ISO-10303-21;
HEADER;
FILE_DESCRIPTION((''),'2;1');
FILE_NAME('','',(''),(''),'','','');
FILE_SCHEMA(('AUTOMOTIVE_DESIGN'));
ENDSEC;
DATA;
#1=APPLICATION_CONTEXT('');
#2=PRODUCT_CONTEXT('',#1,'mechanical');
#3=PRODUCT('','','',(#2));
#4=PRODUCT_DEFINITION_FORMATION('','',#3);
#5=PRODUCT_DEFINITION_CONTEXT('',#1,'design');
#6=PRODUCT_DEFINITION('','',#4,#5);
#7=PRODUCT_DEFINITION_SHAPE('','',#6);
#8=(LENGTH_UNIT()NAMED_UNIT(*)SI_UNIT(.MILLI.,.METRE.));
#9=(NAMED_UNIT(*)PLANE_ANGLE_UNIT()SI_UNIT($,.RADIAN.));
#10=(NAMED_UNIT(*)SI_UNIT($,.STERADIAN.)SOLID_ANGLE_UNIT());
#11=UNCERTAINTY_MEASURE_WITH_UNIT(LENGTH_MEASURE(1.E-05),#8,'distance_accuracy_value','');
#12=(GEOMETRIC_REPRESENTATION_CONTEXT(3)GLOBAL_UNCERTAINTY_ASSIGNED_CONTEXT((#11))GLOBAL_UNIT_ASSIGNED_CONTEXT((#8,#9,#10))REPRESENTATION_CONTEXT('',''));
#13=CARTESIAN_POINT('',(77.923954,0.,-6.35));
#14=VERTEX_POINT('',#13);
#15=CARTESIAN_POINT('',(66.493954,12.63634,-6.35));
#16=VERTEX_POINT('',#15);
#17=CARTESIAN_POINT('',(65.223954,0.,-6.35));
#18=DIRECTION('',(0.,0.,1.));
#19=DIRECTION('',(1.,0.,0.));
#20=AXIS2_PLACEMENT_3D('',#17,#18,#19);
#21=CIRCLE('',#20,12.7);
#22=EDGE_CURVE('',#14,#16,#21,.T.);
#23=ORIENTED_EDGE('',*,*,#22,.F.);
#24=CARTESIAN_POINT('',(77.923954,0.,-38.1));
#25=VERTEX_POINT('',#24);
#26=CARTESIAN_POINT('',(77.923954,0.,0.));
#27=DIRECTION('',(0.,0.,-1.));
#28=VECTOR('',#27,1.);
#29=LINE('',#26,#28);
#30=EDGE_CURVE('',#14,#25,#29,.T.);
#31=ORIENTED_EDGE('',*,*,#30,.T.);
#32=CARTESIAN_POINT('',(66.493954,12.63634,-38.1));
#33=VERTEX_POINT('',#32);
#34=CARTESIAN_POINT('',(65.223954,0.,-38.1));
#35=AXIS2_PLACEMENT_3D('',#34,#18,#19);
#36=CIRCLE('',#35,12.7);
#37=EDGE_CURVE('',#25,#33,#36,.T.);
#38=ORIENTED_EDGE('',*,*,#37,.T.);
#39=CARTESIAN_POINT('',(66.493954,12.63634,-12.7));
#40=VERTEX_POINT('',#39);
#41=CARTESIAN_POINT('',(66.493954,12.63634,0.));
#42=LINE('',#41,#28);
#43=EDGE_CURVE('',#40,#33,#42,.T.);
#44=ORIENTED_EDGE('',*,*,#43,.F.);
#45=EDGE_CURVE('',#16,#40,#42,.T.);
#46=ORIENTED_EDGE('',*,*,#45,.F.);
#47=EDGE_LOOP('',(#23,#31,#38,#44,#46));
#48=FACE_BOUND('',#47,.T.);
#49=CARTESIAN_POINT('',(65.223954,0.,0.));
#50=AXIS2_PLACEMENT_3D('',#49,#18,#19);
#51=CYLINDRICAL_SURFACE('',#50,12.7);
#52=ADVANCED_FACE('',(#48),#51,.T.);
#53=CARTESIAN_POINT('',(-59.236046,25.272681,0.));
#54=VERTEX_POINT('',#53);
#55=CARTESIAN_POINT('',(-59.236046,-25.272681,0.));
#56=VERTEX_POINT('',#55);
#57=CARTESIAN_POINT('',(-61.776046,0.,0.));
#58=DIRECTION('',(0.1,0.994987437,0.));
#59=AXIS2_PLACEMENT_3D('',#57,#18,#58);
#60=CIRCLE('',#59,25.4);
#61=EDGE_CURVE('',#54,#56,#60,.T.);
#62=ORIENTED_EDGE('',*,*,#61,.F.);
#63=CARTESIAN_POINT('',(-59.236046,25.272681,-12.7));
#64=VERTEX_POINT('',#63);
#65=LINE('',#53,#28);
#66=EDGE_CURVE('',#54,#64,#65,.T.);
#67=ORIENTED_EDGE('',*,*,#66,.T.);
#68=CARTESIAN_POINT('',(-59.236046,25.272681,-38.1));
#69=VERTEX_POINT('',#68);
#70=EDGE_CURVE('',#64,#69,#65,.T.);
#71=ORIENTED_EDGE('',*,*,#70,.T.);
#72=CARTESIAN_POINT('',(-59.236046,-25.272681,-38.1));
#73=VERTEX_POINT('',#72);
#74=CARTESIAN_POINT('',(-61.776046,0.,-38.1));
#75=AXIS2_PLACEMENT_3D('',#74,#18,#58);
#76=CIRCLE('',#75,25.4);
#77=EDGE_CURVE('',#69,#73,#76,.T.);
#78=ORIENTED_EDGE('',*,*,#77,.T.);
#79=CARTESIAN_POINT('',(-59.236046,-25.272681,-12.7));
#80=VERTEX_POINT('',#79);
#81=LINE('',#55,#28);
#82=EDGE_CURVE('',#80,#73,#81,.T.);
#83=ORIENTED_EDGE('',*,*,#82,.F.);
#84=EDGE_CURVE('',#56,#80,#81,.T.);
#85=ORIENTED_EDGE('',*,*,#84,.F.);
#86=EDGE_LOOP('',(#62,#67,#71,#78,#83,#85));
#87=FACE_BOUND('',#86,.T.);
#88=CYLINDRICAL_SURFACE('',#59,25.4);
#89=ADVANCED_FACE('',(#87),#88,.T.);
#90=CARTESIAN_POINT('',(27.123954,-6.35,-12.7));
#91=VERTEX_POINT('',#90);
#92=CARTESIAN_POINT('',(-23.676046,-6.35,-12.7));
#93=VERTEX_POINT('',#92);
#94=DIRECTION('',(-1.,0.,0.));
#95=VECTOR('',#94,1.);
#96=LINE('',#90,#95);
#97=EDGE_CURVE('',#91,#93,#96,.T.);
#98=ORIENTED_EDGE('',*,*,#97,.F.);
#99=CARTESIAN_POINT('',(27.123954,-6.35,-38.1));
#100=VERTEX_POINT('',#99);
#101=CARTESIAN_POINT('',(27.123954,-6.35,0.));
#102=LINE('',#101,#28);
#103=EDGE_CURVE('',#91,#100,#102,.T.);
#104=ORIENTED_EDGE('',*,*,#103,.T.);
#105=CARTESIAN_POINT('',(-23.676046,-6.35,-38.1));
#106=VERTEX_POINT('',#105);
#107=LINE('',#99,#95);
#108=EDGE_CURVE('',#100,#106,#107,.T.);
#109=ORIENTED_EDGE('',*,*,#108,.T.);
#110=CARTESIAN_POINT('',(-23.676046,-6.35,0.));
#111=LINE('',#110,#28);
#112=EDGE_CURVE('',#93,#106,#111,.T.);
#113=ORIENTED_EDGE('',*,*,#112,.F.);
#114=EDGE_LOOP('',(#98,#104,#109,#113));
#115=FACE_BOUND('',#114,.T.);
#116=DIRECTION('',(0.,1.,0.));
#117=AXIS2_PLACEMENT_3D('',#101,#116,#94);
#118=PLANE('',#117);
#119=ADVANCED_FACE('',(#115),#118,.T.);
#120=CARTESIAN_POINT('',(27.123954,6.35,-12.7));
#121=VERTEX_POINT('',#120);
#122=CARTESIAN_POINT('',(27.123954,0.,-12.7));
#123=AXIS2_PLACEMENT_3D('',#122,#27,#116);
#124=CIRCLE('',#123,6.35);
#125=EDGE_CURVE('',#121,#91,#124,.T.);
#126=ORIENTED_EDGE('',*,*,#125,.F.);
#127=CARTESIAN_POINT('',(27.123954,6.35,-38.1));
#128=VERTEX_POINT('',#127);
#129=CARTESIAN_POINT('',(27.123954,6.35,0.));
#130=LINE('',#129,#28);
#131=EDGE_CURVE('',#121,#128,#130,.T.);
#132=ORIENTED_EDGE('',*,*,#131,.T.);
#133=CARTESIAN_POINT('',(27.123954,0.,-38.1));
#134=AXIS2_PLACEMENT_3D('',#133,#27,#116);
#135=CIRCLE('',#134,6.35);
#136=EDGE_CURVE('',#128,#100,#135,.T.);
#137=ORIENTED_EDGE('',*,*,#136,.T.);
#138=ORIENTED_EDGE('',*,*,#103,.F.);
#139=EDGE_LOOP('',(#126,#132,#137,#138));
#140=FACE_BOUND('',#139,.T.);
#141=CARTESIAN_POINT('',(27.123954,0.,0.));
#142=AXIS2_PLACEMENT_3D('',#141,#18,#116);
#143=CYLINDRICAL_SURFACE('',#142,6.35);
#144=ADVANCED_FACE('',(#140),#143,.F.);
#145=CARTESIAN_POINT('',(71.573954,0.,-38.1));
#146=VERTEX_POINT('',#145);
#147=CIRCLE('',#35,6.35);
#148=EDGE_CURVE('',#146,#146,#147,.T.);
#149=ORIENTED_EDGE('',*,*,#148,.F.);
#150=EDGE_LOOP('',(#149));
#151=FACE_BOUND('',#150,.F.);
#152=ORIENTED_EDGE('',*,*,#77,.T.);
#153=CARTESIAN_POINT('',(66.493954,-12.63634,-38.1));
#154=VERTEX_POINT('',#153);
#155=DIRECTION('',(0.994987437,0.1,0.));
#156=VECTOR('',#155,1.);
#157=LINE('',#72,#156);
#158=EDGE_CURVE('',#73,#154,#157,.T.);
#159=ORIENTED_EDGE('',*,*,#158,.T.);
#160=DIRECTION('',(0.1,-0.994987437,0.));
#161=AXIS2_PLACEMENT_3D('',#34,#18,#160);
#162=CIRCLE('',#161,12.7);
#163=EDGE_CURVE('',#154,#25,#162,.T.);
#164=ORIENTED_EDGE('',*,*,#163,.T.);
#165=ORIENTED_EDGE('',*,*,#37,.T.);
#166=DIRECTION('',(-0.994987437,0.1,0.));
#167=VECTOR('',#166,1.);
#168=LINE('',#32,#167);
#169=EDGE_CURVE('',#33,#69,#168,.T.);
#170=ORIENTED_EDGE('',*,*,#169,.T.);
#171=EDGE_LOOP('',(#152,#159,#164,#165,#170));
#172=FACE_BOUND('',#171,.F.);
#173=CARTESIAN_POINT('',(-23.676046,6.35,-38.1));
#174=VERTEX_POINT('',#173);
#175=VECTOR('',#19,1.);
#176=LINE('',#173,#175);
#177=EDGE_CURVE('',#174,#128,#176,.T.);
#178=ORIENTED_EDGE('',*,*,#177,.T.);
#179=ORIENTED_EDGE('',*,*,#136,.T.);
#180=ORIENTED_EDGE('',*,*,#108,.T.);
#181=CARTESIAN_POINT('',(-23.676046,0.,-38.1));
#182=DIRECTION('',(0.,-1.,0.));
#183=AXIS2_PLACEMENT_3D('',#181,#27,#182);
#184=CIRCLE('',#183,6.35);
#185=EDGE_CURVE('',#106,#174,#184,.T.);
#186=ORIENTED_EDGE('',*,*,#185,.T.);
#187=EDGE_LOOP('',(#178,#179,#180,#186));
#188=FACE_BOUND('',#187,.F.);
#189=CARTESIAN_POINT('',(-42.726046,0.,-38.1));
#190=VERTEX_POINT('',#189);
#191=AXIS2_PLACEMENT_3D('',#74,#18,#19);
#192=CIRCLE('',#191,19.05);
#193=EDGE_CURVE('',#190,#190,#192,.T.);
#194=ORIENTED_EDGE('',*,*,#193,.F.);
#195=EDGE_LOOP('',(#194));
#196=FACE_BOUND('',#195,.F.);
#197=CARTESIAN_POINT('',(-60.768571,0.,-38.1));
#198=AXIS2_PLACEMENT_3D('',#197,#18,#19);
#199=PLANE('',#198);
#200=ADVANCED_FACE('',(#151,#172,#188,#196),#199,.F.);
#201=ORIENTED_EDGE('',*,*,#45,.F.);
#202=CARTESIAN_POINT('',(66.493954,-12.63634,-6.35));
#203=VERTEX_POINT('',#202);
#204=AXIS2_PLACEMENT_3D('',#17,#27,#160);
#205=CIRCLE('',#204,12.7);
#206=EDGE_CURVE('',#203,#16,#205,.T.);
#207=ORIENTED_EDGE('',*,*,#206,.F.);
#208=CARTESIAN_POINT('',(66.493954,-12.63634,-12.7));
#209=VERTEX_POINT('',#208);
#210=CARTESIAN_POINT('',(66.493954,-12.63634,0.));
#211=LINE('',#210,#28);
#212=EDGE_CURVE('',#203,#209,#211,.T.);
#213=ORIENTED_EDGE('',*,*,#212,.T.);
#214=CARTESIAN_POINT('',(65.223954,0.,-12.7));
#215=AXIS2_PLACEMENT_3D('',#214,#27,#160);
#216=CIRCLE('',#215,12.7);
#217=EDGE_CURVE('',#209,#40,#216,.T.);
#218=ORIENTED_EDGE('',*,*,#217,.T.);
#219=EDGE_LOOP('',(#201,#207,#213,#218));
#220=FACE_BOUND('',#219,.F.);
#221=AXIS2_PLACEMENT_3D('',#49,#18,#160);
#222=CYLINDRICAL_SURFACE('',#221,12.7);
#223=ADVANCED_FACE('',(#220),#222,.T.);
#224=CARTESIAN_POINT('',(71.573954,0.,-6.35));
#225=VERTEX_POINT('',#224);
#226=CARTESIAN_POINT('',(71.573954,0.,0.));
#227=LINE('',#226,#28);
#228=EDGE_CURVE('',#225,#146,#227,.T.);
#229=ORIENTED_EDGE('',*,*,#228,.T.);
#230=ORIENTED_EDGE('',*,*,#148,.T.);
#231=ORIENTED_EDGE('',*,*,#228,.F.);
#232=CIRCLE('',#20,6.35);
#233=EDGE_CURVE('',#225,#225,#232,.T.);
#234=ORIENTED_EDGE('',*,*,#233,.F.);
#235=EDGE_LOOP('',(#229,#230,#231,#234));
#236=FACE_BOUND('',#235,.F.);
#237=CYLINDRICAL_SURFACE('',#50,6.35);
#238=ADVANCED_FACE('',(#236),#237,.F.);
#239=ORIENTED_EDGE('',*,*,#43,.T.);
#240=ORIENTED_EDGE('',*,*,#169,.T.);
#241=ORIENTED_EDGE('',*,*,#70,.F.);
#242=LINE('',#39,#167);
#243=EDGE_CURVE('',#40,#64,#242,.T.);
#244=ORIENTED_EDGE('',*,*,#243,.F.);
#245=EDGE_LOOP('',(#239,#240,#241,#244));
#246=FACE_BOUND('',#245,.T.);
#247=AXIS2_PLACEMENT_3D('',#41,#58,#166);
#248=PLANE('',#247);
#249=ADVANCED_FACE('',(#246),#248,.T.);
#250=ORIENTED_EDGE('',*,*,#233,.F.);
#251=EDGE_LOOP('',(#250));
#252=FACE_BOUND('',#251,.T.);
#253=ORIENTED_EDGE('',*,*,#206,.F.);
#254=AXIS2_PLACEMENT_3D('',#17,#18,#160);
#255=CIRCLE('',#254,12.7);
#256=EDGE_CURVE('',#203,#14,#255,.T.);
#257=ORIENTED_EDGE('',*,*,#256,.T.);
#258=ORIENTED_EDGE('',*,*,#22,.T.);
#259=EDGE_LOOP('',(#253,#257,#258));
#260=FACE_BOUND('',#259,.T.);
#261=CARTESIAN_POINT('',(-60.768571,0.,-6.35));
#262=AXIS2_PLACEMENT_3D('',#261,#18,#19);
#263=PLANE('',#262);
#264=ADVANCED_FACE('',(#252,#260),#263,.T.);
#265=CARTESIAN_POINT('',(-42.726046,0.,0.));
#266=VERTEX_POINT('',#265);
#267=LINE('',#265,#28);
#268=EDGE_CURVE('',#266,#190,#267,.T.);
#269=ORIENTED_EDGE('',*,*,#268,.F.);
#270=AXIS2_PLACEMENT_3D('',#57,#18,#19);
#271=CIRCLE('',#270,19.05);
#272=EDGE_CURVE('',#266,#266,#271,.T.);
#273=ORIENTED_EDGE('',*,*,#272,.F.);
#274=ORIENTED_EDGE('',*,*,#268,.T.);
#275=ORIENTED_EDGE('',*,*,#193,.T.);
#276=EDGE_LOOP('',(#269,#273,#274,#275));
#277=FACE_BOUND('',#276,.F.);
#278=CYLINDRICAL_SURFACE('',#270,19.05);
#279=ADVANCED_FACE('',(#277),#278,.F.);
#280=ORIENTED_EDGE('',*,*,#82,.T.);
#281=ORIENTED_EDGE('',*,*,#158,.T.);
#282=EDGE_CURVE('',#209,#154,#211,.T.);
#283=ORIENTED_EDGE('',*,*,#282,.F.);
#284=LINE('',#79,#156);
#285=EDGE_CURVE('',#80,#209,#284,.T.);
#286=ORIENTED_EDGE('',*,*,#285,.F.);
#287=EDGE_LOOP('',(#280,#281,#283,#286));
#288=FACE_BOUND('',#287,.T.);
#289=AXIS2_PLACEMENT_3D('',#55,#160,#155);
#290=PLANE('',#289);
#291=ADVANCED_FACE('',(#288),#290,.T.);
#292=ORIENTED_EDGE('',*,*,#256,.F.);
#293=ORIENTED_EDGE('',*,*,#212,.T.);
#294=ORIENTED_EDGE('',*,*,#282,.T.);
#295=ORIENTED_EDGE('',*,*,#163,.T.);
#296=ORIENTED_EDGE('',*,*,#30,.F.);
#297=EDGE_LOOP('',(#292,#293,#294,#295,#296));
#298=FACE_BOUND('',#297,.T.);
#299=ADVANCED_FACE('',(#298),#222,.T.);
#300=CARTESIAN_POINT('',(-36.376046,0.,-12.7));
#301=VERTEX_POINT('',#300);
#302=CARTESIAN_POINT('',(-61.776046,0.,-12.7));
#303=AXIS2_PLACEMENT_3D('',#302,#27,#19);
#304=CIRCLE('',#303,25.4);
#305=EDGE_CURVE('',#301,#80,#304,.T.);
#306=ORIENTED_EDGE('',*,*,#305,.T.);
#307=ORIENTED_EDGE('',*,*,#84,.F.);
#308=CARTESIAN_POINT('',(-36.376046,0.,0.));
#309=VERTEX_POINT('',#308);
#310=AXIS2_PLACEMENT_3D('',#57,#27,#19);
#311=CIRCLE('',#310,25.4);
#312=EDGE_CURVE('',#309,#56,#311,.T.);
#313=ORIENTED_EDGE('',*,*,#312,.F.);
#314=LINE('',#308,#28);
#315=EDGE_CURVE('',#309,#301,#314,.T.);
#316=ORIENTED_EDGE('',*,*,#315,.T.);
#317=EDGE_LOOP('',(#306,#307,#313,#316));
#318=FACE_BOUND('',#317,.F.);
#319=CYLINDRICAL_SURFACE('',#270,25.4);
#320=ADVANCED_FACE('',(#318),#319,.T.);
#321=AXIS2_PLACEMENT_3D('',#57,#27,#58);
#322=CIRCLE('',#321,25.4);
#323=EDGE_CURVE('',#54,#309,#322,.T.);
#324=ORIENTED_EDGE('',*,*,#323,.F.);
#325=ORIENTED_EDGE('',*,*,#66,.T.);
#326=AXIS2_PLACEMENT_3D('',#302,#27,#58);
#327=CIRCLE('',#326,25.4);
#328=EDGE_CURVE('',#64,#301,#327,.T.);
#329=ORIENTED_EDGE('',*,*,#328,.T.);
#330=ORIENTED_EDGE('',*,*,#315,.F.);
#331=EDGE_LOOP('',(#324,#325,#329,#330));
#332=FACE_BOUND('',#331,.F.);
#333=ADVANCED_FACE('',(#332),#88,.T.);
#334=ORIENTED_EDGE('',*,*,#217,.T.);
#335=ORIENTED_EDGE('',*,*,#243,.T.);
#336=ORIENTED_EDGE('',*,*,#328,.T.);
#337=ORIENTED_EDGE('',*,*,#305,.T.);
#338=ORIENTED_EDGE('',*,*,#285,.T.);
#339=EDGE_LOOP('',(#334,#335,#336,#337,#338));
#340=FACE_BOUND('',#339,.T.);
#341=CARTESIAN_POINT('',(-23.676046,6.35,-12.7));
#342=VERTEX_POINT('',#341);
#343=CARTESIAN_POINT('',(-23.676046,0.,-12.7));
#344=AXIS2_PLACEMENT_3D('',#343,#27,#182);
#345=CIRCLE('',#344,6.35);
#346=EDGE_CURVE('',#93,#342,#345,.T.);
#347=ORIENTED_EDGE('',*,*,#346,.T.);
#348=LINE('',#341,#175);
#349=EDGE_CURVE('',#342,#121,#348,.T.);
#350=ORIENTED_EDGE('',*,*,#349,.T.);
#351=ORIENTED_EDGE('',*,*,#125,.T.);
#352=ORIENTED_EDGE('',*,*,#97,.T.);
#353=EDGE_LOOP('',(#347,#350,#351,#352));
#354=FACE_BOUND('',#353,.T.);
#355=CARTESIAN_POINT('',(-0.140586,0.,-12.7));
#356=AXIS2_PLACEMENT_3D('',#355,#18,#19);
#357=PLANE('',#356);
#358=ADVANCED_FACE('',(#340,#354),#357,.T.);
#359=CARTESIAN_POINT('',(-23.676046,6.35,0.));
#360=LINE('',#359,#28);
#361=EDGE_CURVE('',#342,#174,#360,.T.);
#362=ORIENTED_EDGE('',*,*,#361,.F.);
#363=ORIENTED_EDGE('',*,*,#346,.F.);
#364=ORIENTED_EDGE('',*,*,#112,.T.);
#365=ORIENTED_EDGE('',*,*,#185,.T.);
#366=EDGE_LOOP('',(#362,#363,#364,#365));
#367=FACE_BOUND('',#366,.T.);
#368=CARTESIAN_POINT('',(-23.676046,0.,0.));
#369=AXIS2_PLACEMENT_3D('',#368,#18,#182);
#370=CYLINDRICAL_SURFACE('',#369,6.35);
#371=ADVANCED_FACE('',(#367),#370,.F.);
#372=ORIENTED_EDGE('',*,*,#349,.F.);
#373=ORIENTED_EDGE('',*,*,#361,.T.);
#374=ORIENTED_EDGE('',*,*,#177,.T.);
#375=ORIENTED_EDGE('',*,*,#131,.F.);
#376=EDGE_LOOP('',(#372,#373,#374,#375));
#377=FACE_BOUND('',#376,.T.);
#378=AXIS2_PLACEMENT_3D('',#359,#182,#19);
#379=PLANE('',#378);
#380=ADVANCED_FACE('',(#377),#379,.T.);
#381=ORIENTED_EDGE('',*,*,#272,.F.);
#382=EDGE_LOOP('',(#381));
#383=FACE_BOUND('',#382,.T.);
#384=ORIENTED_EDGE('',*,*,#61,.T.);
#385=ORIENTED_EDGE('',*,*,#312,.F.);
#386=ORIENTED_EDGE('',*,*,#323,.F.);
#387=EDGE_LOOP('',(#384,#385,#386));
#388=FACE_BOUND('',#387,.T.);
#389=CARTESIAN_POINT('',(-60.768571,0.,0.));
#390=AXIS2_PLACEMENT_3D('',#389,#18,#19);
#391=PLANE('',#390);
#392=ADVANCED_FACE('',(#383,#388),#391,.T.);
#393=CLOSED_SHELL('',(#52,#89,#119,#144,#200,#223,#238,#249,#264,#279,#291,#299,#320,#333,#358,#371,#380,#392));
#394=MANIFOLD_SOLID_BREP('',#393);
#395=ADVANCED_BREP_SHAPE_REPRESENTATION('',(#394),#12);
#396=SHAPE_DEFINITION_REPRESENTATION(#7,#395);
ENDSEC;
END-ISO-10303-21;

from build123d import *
from build123d import SkipClean  # not in build123d's __all__

# Parameters (mm, degrees)
F0_R     = 19.05
F0_R_2   = 6.35
F1_DEPTH = 38.1
F2_DEPTH = 12.7
F3_DEPTH = 6.35


with BuildPart() as f1:
    # F0 (on Top) → F1 (new body)
    with BuildSketch(Plane.XY):
        with BuildLine():
            ThreePointArc((-59.2360458782, -25.2726809025), (-42.9389017209, -17.0388379885), (-36.3760458782, 0))
            ThreePointArc((-36.3760458782, 0), (-42.9389017209, 17.0388379885), (-59.2360458782, 25.2726809025))
            ThreePointArc((-59.2360458782, 25.2726809025), (-87.1760458782, 0), (-59.2360458782, -25.2726809025))
        make_face()
        with Locations((-61.7760458782, 0)):
            Circle(F0_R, mode=Mode.SUBTRACT)
        with BuildLine():
            ThreePointArc((-59.2360458782, 25.2726809025), (-42.9389017209, 17.0388379885), (-36.3760458782, 0))
            ThreePointArc((-36.3760458782, 0), (-42.9389017209, -17.0388379885), (-59.2360458782, -25.2726809025))
            Line((-59.2360458782, -25.2726809025), (66.4939541218, -12.6363404513))
            ThreePointArc((66.4939541218, -12.6363404513), (52.5239541218, 0), (66.4939541218, 12.6363404513))
            Line((66.4939541218, 12.6363404513), (-59.2360458782, 25.2726809025))
        make_face()
        with BuildLine():
            ThreePointArc((-23.6760458782, -6.35), (-30.0260458782, 0), (-23.6760458782, 6.35))
            Line((-23.6760458782, 6.35), (27.1239541218, 6.35))
            ThreePointArc((27.1239541218, 6.35), (33.4739541218, 0), (27.1239541218, -6.35))
            Line((27.1239541218, -6.35), (-23.6760458782, -6.35))
        make_face(mode=Mode.SUBTRACT)
        with BuildLine():
            ThreePointArc((77.9239541218, 0), (74.6425262005, 8.5194189943), (66.4939541218, 12.6363404513))
            ThreePointArc((66.4939541218, 12.6363404513), (52.5239541218, 0), (66.4939541218, -12.6363404513))
            ThreePointArc((66.4939541218, -12.6363404513), (74.6425262005, -8.5194189943), (77.9239541218, 0))
        make_face()
        with Locations((65.2239541218, 0)):
            Circle(F0_R_2, mode=Mode.SUBTRACT)
    extrude(amount=-F1_DEPTH)

    # F0 (on Top) → F2 (cut)
    with BuildSketch(Plane.XY):
        with BuildLine():
            ThreePointArc((-59.2360458782, 25.2726809025), (-42.9389017209, 17.0388379885), (-36.3760458782, 0))
            ThreePointArc((-36.3760458782, 0), (-42.9389017209, -17.0388379885), (-59.2360458782, -25.2726809025))
            Line((-59.2360458782, -25.2726809025), (66.4939541218, -12.6363404513))
            ThreePointArc((66.4939541218, -12.6363404513), (52.5239541218, 0), (66.4939541218, 12.6363404513))
            Line((66.4939541218, 12.6363404513), (-59.2360458782, 25.2726809025))
        make_face()
        with BuildLine():
            ThreePointArc((-23.6760458782, -6.35), (-30.0260458782, 0), (-23.6760458782, 6.35))
            Line((-23.6760458782, 6.35), (27.1239541218, 6.35))
            ThreePointArc((27.1239541218, 6.35), (33.4739541218, 0), (27.1239541218, -6.35))
            Line((27.1239541218, -6.35), (-23.6760458782, -6.35))
        make_face(mode=Mode.SUBTRACT)
    with SkipClean():  # cleaning this boolean's faces spoils the solid; the shape is the same uncleaned
        extrude(amount=-F2_DEPTH, mode=Mode.SUBTRACT)

    # F3 (cut): a face of the model
    f3_faces = [f1.faces().sort_by_distance(p)[0] for p in [
        (77.564743877, 0, 0),
    ]]
    extrude(f3_faces, amount=-F3_DEPTH, mode=Mode.SUBTRACT)


solid = f1.part
